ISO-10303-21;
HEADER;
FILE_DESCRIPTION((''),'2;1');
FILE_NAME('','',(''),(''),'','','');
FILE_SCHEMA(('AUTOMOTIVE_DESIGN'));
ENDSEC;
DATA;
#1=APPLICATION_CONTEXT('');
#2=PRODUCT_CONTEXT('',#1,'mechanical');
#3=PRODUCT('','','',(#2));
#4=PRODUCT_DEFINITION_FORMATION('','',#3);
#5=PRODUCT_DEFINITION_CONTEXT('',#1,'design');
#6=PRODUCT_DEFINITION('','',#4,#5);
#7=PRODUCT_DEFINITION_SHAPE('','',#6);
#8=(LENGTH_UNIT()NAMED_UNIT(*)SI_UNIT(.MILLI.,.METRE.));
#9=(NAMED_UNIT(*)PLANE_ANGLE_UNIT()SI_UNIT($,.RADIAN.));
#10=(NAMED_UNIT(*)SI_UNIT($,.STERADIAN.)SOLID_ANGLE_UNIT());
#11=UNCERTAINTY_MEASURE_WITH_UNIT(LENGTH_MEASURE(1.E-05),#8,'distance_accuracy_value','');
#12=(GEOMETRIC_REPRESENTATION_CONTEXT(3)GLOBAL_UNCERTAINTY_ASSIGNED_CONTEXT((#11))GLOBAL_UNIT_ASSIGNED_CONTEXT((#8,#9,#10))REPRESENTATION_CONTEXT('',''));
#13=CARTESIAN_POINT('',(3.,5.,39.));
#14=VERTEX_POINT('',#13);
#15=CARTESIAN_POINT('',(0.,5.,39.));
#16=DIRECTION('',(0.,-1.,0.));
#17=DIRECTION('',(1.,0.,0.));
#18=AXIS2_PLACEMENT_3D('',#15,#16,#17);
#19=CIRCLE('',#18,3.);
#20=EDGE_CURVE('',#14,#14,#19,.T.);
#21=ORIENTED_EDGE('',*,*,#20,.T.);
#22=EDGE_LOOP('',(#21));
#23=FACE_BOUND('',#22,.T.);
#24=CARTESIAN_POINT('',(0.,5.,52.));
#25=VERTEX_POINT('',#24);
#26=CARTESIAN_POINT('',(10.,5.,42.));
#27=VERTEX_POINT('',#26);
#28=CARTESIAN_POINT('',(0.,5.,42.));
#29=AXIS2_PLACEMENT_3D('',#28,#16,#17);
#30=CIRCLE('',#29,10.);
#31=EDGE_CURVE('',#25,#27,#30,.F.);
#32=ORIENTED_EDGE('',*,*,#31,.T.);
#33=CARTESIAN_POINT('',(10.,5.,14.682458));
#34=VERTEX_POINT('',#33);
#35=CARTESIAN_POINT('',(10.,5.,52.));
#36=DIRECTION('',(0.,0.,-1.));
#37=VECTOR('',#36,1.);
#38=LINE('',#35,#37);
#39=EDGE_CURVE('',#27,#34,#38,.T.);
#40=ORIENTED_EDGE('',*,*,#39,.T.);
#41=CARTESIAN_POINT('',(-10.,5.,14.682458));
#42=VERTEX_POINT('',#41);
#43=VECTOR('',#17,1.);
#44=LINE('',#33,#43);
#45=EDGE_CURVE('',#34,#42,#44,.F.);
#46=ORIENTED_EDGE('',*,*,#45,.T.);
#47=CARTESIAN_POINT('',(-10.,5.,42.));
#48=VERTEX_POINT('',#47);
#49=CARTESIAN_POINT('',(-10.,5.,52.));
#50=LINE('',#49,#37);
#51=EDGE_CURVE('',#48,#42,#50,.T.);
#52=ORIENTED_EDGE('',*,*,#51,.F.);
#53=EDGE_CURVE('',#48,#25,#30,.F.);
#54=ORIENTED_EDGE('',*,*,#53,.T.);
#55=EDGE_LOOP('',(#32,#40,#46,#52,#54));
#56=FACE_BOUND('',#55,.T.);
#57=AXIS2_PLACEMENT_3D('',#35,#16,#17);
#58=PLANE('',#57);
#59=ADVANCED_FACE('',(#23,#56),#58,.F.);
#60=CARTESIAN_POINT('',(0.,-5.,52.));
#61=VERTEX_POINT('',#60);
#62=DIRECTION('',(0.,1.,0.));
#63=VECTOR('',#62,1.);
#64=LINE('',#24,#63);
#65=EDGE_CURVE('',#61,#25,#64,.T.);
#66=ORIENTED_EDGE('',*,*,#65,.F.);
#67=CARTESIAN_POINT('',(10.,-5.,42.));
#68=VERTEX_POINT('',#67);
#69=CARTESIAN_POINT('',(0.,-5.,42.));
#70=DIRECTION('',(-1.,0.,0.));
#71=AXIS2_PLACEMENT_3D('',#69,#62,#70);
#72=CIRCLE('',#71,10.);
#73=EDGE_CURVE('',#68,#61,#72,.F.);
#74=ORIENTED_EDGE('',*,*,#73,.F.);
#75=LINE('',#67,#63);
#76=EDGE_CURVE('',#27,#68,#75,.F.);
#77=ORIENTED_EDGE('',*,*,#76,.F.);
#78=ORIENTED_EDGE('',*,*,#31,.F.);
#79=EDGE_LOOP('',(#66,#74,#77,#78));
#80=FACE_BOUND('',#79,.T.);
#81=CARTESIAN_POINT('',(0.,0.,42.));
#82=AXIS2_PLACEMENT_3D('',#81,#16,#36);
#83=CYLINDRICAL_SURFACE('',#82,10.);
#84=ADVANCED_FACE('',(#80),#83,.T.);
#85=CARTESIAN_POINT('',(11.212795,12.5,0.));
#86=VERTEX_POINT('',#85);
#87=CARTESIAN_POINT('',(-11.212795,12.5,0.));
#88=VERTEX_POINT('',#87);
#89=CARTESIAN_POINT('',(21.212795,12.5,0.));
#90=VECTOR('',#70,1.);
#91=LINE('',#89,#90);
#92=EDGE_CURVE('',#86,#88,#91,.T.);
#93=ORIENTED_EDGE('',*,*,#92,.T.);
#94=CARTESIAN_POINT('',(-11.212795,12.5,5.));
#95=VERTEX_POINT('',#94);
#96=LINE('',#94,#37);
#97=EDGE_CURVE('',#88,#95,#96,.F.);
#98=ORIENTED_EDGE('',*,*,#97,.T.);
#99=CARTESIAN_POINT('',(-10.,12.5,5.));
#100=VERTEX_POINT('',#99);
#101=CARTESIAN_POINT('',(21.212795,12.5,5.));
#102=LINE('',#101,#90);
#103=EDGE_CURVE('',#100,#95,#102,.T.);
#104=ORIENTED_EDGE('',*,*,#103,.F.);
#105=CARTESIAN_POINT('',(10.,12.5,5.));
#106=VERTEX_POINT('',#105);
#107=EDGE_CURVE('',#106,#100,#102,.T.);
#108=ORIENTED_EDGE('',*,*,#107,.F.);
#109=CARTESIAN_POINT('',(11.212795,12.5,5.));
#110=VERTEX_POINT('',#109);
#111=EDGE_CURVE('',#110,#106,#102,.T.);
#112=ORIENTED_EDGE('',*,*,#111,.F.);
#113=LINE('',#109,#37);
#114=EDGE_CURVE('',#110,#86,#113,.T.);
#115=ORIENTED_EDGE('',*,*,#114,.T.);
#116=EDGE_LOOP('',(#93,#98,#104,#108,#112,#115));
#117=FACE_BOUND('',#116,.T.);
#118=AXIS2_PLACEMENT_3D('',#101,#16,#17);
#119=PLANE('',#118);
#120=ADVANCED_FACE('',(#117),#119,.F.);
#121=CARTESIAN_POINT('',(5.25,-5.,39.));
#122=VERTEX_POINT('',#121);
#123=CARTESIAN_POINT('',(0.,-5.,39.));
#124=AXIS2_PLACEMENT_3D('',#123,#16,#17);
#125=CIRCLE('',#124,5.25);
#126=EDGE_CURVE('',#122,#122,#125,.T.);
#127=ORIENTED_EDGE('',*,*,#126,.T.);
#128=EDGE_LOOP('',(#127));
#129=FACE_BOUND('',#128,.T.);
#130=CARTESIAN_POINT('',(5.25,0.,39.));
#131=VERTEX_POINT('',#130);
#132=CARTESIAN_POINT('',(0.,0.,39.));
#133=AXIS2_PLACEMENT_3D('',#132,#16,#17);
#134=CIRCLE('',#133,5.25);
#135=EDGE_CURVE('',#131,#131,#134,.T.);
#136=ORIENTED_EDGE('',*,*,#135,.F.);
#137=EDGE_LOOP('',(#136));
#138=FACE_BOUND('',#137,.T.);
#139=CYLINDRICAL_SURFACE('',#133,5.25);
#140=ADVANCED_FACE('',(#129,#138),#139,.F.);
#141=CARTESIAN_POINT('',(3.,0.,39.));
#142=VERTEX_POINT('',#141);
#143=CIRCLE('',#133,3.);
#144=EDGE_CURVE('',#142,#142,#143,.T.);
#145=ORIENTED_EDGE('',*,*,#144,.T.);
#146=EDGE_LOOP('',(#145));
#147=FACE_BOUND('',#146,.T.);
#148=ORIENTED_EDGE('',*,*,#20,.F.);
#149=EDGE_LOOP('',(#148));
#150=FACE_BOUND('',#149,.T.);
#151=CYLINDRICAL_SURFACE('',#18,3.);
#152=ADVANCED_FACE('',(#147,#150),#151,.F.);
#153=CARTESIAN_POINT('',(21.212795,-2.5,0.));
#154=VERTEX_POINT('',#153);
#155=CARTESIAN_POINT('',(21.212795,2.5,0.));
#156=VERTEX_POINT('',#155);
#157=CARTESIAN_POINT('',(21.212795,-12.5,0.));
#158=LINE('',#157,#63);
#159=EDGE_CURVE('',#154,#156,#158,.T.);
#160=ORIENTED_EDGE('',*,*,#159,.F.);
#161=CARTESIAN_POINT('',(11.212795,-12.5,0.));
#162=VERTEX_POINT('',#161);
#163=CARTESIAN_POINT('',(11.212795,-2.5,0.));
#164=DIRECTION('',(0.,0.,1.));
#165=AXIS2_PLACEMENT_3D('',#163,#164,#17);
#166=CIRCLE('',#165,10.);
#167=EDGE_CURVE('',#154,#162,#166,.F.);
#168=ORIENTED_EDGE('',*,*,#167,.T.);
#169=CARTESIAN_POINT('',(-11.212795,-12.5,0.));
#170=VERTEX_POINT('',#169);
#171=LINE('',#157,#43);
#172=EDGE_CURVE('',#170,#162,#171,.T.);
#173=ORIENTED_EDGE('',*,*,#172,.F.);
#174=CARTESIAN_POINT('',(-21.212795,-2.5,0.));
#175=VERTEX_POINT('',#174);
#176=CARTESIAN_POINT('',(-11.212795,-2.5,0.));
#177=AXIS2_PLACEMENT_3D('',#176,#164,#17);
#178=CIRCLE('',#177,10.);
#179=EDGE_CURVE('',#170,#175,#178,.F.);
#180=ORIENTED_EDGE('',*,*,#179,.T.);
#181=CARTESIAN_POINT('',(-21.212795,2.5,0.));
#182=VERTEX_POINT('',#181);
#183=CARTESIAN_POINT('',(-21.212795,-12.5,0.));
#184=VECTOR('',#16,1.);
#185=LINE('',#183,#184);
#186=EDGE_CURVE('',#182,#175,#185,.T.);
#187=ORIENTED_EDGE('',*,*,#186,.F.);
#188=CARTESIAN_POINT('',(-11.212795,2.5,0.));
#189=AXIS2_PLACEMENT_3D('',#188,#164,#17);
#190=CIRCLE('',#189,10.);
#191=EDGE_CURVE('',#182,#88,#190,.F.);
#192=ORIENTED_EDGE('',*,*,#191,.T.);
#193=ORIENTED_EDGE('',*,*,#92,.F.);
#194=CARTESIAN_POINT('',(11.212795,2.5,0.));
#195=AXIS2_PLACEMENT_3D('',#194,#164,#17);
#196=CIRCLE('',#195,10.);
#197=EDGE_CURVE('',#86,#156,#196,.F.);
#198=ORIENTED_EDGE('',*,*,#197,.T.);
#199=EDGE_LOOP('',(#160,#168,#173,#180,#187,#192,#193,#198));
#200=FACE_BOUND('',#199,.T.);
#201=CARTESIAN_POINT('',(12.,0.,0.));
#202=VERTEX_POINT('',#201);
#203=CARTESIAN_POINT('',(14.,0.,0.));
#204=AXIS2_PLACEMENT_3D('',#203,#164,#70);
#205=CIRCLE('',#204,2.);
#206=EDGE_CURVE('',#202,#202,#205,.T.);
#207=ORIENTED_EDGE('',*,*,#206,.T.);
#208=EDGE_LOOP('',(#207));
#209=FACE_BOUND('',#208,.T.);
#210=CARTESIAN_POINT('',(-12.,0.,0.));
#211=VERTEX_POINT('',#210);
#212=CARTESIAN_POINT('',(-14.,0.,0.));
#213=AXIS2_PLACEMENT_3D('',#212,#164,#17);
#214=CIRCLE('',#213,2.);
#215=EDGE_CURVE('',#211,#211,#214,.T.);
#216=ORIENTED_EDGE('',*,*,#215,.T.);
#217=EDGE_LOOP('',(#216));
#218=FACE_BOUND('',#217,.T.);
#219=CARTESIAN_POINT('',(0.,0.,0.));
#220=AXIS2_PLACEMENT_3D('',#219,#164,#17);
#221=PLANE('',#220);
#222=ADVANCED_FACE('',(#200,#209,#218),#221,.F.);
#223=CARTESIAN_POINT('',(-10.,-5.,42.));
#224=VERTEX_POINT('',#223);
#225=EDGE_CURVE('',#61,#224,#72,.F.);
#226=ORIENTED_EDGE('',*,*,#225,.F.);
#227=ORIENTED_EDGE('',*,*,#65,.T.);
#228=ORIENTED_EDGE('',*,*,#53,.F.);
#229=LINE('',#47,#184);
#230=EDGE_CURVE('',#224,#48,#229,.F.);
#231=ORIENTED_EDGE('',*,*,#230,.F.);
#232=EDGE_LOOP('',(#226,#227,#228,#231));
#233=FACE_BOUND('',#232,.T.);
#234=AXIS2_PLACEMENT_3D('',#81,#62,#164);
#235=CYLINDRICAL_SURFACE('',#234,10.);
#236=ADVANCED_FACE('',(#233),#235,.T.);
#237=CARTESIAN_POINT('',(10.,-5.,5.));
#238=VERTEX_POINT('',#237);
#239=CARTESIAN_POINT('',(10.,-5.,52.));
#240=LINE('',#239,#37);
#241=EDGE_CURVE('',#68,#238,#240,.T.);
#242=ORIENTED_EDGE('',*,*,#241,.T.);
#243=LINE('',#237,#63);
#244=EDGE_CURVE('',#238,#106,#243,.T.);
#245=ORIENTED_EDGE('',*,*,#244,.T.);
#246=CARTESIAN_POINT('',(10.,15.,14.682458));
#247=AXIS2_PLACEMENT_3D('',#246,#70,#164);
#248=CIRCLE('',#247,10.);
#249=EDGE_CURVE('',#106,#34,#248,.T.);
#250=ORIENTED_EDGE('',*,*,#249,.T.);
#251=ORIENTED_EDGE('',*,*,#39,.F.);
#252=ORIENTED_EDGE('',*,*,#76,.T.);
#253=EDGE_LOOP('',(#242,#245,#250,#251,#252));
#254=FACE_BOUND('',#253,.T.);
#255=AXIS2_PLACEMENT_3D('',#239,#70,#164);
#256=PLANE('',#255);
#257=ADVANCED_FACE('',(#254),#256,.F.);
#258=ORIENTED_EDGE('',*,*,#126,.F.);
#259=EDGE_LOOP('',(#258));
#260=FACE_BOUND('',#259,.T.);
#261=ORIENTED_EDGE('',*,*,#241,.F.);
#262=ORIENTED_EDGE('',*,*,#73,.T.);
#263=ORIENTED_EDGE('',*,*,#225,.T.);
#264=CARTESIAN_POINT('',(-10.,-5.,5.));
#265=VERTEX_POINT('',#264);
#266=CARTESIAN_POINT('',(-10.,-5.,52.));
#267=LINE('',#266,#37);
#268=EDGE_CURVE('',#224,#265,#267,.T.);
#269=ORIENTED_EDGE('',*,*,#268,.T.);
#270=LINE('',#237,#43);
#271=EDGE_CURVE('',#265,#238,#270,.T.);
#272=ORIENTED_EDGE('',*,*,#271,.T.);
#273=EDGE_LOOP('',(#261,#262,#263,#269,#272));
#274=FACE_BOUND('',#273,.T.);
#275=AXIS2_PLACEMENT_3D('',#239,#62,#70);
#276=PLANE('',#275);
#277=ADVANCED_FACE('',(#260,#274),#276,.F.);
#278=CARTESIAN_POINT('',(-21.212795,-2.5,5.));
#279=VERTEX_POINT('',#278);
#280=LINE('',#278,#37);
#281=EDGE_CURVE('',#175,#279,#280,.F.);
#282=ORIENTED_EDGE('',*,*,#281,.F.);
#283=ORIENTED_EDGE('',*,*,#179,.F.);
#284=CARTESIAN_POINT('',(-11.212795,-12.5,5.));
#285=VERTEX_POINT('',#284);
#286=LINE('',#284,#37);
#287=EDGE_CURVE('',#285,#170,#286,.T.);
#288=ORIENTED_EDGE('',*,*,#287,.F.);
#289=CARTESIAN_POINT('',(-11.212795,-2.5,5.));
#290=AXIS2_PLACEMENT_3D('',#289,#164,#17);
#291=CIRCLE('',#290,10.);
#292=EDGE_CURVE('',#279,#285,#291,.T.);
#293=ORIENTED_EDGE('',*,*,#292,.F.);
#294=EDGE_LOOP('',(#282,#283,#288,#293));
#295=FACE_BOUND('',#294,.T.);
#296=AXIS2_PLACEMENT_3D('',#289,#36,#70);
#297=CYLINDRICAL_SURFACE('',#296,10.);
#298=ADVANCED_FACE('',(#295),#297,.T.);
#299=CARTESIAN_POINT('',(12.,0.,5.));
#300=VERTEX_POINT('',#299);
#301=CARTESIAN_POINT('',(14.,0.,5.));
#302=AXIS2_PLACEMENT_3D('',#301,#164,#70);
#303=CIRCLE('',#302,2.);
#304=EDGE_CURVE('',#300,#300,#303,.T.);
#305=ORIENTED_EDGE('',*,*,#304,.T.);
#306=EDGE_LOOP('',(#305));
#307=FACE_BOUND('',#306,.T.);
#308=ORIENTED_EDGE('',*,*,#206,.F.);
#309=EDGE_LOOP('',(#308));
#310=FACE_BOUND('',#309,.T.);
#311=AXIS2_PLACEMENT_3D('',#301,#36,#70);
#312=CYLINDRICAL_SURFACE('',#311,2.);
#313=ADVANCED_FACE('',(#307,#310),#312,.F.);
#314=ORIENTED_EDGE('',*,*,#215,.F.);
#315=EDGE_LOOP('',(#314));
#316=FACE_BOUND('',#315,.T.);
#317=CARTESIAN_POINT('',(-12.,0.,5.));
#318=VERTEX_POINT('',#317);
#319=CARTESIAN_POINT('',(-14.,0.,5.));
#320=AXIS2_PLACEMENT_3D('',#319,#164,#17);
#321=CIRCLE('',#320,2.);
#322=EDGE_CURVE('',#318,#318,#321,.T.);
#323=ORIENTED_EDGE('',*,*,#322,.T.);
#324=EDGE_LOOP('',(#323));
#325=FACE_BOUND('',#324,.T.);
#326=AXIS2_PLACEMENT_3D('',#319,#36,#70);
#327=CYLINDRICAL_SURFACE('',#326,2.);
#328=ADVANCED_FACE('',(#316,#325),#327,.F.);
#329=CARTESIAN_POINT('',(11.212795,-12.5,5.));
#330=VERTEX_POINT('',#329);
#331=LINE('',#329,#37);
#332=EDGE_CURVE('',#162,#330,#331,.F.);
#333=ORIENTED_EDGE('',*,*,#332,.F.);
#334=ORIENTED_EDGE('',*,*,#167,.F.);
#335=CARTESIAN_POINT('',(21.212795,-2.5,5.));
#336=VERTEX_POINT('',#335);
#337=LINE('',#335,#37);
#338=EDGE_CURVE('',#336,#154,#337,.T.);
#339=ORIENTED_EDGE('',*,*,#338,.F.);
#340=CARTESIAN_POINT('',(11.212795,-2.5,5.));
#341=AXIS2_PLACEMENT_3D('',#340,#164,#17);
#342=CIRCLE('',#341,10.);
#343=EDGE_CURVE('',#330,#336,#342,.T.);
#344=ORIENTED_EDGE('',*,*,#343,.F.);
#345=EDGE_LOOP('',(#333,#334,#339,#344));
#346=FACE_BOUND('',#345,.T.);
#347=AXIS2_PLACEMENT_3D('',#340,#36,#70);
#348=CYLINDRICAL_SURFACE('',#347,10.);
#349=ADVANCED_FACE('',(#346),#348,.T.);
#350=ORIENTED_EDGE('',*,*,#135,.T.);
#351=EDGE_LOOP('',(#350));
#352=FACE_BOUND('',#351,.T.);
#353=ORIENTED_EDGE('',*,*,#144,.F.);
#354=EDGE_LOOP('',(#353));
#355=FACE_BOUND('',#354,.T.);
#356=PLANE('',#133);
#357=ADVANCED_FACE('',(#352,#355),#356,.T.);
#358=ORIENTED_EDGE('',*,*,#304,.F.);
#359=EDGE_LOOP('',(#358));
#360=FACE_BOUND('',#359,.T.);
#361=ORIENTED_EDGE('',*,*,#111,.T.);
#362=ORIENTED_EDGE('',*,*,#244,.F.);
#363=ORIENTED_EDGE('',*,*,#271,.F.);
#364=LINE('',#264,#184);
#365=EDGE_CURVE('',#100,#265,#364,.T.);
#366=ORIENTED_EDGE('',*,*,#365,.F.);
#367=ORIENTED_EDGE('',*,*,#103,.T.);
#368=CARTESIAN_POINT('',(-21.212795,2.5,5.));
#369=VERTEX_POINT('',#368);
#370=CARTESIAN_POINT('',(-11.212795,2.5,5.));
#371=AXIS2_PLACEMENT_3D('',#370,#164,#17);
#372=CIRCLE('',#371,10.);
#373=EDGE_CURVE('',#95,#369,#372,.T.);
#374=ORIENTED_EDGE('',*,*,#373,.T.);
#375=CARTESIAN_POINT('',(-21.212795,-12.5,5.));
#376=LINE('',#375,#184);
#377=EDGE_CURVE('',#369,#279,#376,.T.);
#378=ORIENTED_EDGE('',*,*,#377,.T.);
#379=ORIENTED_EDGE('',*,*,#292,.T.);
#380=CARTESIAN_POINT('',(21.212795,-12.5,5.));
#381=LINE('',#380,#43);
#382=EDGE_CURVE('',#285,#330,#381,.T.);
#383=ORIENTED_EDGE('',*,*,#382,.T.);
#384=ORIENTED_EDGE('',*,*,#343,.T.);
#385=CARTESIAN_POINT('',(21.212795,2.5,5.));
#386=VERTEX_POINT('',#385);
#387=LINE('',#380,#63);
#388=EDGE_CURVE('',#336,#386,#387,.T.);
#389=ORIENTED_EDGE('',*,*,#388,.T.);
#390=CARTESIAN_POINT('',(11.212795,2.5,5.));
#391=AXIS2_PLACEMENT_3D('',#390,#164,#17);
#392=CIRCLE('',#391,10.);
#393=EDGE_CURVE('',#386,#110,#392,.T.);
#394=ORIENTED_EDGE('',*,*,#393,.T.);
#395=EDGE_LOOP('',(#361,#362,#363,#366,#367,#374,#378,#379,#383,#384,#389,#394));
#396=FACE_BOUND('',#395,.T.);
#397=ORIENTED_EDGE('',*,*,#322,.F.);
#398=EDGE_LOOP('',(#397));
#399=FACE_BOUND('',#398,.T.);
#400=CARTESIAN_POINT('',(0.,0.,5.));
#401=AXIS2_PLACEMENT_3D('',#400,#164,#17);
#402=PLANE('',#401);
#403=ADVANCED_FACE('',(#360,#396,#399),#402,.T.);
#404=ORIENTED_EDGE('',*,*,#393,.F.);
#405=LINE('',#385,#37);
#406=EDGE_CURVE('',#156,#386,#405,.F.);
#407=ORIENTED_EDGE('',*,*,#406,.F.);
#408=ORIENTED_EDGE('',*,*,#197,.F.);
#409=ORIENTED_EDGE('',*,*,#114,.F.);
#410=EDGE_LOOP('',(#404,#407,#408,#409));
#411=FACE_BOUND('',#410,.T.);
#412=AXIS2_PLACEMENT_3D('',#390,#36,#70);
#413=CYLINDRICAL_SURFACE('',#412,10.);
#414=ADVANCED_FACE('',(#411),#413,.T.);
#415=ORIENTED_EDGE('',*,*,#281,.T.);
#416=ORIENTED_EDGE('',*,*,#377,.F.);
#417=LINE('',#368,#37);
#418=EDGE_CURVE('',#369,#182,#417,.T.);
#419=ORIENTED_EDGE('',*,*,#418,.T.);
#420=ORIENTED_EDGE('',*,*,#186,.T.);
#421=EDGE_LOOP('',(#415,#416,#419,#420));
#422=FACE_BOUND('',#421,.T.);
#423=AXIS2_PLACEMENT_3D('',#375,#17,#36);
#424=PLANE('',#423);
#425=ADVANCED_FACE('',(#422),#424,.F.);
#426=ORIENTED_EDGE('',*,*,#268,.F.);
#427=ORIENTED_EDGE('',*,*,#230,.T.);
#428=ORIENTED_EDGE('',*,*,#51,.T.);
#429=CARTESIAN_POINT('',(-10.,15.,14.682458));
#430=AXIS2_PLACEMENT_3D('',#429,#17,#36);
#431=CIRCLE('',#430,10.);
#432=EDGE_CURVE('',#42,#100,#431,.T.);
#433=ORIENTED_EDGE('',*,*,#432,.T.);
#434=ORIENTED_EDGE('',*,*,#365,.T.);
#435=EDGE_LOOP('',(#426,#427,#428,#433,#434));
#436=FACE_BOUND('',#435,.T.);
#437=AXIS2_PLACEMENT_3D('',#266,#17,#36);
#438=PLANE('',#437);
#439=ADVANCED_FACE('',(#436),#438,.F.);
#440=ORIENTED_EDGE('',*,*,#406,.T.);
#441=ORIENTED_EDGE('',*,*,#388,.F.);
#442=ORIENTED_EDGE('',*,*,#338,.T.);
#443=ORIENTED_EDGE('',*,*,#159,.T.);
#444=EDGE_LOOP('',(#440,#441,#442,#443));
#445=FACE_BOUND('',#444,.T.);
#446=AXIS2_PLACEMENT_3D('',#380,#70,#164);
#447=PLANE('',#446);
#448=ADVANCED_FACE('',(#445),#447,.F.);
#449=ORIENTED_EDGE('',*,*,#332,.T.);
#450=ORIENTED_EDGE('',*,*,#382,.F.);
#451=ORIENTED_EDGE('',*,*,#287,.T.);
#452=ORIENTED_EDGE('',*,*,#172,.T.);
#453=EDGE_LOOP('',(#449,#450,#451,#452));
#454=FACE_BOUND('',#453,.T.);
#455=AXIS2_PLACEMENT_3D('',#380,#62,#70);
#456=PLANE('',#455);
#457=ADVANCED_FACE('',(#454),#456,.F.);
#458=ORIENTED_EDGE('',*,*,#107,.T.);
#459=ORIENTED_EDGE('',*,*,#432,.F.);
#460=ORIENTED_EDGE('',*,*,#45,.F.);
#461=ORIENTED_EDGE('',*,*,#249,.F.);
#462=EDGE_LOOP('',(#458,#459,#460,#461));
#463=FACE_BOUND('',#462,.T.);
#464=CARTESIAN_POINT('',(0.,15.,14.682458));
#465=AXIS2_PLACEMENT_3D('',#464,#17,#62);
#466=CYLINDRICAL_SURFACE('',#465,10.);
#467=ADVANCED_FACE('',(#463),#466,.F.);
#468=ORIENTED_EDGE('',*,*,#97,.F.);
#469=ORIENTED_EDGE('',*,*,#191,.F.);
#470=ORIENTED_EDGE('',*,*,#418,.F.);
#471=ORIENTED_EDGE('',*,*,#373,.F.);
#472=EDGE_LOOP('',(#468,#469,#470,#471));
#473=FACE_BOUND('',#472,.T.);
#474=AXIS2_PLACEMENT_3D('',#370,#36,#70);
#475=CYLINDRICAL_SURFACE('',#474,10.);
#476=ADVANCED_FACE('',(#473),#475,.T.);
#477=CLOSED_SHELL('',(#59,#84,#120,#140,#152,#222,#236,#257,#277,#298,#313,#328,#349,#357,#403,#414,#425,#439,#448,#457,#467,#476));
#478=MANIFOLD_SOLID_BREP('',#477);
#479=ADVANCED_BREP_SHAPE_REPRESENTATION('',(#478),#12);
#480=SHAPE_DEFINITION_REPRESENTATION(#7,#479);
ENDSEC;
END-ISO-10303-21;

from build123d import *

# Parameters (mm, degrees)
SKETCH1_W           = 42.425590724
SKETCH1_H           = 25
SKETCH1_R           = 2
BOSS_EXTRUDE1_DEPTH = 5
FILLET1_R           = 10
SKETCH2_W           = 20
SKETCH2_H           = 10
BOSS_EXTRUDE2_DEPTH = 47
SKETCH3_R           = 5.25
CUT_EXTRUDE1_DEPTH  = 5
SKETCH4_R           = 3
CUT_EXTRUDE2_DEPTH  = 5
FILLET2_R           = 10


with BuildPart() as part:
    # Sketch1 → Boss-Extrude1 (new body)
    with BuildSketch(Plane.XY):
        Rectangle(SKETCH1_W, SKETCH1_H)
        with Locations((-14, 0)):
            Circle(SKETCH1_R, mode=Mode.SUBTRACT)
        with Locations(Location((14, 0, 0), (0, 0, 180))):
            Circle(SKETCH1_R, mode=Mode.SUBTRACT)
    extrude(amount=BOSS_EXTRUDE1_DEPTH)

    # Fillet1
    fillet1_edges = [part.edges().sort_by_distance(p)[0] for p in [
        (-21.212795362, 12.5, 2.5),
        (21.212795362, 12.5, 2.5),
        (21.212795362, -12.5, 2.5),
        (-21.212795362, -12.5, 2.5),
    ]]
    fillet(fillet1_edges, radius=FILLET1_R)

    # Sketch2 → Boss-Extrude2 (add)
    with BuildSketch(Plane.XY.offset(5)):
        Rectangle(SKETCH2_W, SKETCH2_H)
    extrude(amount=BOSS_EXTRUDE2_DEPTH)

    # Sketch3 → Cut-Extrude1 (cut)
    with BuildSketch(Plane.XZ.offset(5)):
        with Locations((0, 39)):
            Circle(SKETCH3_R)
    extrude(amount=-CUT_EXTRUDE1_DEPTH, mode=Mode.SUBTRACT)

    # Sketch4 → Cut-Extrude2 (cut)
    with BuildSketch(Plane.XZ):
        with Locations((0, 39)):
            Circle(SKETCH4_R)
    extrude(amount=-CUT_EXTRUDE2_DEPTH, mode=Mode.SUBTRACT)

    # Fillet2
    # the kernel refuses this fillet: 10 mm, written as the material it adds along each edge
    with BuildSketch(Plane(origin=(-10, 5, 5), x_dir=(0, 1, 0), z_dir=(1, 0, 0))) as fillet2_piece_1:
        with BuildLine():
            CenterArc((10, 9.682458366), FILLET2_R, 180, 75.522487814)
            Line((0, 9.682458366), (0, 0))
            Line((0, 0), (7.5, 0))
        make_face()
    extrude(amount=20)
    # the kernel refuses this fillet: 10 mm, written as the material it takes off along each edge
    with BuildSketch(Plane(origin=(-10, -30, 52), x_dir=(1, 0, 0), z_dir=(0, 1, 0))) as fillet2_2_piece_1:
        with BuildLine():
            CenterArc((FILLET2_R, FILLET2_R), FILLET2_R, 180, 90)
            Line((0, FILLET2_R), (0, 0))
            Line((0, 0), (FILLET2_R, 0))
        make_face()
    extrude(amount=60, mode=Mode.SUBTRACT)
    with BuildSketch(Plane(origin=(10, 30, 52), x_dir=(0, 0, -1), z_dir=(0, -1, 0))) as fillet2_2_piece_2:
        with BuildLine():
            CenterArc((FILLET2_R, -FILLET2_R), FILLET2_R, 90, 90)
            Line((0, -FILLET2_R), (0, 0))
            Line((0, 0), (FILLET2_R, 0))
        make_face()
    extrude(amount=60, mode=Mode.SUBTRACT)


solid = part.part
